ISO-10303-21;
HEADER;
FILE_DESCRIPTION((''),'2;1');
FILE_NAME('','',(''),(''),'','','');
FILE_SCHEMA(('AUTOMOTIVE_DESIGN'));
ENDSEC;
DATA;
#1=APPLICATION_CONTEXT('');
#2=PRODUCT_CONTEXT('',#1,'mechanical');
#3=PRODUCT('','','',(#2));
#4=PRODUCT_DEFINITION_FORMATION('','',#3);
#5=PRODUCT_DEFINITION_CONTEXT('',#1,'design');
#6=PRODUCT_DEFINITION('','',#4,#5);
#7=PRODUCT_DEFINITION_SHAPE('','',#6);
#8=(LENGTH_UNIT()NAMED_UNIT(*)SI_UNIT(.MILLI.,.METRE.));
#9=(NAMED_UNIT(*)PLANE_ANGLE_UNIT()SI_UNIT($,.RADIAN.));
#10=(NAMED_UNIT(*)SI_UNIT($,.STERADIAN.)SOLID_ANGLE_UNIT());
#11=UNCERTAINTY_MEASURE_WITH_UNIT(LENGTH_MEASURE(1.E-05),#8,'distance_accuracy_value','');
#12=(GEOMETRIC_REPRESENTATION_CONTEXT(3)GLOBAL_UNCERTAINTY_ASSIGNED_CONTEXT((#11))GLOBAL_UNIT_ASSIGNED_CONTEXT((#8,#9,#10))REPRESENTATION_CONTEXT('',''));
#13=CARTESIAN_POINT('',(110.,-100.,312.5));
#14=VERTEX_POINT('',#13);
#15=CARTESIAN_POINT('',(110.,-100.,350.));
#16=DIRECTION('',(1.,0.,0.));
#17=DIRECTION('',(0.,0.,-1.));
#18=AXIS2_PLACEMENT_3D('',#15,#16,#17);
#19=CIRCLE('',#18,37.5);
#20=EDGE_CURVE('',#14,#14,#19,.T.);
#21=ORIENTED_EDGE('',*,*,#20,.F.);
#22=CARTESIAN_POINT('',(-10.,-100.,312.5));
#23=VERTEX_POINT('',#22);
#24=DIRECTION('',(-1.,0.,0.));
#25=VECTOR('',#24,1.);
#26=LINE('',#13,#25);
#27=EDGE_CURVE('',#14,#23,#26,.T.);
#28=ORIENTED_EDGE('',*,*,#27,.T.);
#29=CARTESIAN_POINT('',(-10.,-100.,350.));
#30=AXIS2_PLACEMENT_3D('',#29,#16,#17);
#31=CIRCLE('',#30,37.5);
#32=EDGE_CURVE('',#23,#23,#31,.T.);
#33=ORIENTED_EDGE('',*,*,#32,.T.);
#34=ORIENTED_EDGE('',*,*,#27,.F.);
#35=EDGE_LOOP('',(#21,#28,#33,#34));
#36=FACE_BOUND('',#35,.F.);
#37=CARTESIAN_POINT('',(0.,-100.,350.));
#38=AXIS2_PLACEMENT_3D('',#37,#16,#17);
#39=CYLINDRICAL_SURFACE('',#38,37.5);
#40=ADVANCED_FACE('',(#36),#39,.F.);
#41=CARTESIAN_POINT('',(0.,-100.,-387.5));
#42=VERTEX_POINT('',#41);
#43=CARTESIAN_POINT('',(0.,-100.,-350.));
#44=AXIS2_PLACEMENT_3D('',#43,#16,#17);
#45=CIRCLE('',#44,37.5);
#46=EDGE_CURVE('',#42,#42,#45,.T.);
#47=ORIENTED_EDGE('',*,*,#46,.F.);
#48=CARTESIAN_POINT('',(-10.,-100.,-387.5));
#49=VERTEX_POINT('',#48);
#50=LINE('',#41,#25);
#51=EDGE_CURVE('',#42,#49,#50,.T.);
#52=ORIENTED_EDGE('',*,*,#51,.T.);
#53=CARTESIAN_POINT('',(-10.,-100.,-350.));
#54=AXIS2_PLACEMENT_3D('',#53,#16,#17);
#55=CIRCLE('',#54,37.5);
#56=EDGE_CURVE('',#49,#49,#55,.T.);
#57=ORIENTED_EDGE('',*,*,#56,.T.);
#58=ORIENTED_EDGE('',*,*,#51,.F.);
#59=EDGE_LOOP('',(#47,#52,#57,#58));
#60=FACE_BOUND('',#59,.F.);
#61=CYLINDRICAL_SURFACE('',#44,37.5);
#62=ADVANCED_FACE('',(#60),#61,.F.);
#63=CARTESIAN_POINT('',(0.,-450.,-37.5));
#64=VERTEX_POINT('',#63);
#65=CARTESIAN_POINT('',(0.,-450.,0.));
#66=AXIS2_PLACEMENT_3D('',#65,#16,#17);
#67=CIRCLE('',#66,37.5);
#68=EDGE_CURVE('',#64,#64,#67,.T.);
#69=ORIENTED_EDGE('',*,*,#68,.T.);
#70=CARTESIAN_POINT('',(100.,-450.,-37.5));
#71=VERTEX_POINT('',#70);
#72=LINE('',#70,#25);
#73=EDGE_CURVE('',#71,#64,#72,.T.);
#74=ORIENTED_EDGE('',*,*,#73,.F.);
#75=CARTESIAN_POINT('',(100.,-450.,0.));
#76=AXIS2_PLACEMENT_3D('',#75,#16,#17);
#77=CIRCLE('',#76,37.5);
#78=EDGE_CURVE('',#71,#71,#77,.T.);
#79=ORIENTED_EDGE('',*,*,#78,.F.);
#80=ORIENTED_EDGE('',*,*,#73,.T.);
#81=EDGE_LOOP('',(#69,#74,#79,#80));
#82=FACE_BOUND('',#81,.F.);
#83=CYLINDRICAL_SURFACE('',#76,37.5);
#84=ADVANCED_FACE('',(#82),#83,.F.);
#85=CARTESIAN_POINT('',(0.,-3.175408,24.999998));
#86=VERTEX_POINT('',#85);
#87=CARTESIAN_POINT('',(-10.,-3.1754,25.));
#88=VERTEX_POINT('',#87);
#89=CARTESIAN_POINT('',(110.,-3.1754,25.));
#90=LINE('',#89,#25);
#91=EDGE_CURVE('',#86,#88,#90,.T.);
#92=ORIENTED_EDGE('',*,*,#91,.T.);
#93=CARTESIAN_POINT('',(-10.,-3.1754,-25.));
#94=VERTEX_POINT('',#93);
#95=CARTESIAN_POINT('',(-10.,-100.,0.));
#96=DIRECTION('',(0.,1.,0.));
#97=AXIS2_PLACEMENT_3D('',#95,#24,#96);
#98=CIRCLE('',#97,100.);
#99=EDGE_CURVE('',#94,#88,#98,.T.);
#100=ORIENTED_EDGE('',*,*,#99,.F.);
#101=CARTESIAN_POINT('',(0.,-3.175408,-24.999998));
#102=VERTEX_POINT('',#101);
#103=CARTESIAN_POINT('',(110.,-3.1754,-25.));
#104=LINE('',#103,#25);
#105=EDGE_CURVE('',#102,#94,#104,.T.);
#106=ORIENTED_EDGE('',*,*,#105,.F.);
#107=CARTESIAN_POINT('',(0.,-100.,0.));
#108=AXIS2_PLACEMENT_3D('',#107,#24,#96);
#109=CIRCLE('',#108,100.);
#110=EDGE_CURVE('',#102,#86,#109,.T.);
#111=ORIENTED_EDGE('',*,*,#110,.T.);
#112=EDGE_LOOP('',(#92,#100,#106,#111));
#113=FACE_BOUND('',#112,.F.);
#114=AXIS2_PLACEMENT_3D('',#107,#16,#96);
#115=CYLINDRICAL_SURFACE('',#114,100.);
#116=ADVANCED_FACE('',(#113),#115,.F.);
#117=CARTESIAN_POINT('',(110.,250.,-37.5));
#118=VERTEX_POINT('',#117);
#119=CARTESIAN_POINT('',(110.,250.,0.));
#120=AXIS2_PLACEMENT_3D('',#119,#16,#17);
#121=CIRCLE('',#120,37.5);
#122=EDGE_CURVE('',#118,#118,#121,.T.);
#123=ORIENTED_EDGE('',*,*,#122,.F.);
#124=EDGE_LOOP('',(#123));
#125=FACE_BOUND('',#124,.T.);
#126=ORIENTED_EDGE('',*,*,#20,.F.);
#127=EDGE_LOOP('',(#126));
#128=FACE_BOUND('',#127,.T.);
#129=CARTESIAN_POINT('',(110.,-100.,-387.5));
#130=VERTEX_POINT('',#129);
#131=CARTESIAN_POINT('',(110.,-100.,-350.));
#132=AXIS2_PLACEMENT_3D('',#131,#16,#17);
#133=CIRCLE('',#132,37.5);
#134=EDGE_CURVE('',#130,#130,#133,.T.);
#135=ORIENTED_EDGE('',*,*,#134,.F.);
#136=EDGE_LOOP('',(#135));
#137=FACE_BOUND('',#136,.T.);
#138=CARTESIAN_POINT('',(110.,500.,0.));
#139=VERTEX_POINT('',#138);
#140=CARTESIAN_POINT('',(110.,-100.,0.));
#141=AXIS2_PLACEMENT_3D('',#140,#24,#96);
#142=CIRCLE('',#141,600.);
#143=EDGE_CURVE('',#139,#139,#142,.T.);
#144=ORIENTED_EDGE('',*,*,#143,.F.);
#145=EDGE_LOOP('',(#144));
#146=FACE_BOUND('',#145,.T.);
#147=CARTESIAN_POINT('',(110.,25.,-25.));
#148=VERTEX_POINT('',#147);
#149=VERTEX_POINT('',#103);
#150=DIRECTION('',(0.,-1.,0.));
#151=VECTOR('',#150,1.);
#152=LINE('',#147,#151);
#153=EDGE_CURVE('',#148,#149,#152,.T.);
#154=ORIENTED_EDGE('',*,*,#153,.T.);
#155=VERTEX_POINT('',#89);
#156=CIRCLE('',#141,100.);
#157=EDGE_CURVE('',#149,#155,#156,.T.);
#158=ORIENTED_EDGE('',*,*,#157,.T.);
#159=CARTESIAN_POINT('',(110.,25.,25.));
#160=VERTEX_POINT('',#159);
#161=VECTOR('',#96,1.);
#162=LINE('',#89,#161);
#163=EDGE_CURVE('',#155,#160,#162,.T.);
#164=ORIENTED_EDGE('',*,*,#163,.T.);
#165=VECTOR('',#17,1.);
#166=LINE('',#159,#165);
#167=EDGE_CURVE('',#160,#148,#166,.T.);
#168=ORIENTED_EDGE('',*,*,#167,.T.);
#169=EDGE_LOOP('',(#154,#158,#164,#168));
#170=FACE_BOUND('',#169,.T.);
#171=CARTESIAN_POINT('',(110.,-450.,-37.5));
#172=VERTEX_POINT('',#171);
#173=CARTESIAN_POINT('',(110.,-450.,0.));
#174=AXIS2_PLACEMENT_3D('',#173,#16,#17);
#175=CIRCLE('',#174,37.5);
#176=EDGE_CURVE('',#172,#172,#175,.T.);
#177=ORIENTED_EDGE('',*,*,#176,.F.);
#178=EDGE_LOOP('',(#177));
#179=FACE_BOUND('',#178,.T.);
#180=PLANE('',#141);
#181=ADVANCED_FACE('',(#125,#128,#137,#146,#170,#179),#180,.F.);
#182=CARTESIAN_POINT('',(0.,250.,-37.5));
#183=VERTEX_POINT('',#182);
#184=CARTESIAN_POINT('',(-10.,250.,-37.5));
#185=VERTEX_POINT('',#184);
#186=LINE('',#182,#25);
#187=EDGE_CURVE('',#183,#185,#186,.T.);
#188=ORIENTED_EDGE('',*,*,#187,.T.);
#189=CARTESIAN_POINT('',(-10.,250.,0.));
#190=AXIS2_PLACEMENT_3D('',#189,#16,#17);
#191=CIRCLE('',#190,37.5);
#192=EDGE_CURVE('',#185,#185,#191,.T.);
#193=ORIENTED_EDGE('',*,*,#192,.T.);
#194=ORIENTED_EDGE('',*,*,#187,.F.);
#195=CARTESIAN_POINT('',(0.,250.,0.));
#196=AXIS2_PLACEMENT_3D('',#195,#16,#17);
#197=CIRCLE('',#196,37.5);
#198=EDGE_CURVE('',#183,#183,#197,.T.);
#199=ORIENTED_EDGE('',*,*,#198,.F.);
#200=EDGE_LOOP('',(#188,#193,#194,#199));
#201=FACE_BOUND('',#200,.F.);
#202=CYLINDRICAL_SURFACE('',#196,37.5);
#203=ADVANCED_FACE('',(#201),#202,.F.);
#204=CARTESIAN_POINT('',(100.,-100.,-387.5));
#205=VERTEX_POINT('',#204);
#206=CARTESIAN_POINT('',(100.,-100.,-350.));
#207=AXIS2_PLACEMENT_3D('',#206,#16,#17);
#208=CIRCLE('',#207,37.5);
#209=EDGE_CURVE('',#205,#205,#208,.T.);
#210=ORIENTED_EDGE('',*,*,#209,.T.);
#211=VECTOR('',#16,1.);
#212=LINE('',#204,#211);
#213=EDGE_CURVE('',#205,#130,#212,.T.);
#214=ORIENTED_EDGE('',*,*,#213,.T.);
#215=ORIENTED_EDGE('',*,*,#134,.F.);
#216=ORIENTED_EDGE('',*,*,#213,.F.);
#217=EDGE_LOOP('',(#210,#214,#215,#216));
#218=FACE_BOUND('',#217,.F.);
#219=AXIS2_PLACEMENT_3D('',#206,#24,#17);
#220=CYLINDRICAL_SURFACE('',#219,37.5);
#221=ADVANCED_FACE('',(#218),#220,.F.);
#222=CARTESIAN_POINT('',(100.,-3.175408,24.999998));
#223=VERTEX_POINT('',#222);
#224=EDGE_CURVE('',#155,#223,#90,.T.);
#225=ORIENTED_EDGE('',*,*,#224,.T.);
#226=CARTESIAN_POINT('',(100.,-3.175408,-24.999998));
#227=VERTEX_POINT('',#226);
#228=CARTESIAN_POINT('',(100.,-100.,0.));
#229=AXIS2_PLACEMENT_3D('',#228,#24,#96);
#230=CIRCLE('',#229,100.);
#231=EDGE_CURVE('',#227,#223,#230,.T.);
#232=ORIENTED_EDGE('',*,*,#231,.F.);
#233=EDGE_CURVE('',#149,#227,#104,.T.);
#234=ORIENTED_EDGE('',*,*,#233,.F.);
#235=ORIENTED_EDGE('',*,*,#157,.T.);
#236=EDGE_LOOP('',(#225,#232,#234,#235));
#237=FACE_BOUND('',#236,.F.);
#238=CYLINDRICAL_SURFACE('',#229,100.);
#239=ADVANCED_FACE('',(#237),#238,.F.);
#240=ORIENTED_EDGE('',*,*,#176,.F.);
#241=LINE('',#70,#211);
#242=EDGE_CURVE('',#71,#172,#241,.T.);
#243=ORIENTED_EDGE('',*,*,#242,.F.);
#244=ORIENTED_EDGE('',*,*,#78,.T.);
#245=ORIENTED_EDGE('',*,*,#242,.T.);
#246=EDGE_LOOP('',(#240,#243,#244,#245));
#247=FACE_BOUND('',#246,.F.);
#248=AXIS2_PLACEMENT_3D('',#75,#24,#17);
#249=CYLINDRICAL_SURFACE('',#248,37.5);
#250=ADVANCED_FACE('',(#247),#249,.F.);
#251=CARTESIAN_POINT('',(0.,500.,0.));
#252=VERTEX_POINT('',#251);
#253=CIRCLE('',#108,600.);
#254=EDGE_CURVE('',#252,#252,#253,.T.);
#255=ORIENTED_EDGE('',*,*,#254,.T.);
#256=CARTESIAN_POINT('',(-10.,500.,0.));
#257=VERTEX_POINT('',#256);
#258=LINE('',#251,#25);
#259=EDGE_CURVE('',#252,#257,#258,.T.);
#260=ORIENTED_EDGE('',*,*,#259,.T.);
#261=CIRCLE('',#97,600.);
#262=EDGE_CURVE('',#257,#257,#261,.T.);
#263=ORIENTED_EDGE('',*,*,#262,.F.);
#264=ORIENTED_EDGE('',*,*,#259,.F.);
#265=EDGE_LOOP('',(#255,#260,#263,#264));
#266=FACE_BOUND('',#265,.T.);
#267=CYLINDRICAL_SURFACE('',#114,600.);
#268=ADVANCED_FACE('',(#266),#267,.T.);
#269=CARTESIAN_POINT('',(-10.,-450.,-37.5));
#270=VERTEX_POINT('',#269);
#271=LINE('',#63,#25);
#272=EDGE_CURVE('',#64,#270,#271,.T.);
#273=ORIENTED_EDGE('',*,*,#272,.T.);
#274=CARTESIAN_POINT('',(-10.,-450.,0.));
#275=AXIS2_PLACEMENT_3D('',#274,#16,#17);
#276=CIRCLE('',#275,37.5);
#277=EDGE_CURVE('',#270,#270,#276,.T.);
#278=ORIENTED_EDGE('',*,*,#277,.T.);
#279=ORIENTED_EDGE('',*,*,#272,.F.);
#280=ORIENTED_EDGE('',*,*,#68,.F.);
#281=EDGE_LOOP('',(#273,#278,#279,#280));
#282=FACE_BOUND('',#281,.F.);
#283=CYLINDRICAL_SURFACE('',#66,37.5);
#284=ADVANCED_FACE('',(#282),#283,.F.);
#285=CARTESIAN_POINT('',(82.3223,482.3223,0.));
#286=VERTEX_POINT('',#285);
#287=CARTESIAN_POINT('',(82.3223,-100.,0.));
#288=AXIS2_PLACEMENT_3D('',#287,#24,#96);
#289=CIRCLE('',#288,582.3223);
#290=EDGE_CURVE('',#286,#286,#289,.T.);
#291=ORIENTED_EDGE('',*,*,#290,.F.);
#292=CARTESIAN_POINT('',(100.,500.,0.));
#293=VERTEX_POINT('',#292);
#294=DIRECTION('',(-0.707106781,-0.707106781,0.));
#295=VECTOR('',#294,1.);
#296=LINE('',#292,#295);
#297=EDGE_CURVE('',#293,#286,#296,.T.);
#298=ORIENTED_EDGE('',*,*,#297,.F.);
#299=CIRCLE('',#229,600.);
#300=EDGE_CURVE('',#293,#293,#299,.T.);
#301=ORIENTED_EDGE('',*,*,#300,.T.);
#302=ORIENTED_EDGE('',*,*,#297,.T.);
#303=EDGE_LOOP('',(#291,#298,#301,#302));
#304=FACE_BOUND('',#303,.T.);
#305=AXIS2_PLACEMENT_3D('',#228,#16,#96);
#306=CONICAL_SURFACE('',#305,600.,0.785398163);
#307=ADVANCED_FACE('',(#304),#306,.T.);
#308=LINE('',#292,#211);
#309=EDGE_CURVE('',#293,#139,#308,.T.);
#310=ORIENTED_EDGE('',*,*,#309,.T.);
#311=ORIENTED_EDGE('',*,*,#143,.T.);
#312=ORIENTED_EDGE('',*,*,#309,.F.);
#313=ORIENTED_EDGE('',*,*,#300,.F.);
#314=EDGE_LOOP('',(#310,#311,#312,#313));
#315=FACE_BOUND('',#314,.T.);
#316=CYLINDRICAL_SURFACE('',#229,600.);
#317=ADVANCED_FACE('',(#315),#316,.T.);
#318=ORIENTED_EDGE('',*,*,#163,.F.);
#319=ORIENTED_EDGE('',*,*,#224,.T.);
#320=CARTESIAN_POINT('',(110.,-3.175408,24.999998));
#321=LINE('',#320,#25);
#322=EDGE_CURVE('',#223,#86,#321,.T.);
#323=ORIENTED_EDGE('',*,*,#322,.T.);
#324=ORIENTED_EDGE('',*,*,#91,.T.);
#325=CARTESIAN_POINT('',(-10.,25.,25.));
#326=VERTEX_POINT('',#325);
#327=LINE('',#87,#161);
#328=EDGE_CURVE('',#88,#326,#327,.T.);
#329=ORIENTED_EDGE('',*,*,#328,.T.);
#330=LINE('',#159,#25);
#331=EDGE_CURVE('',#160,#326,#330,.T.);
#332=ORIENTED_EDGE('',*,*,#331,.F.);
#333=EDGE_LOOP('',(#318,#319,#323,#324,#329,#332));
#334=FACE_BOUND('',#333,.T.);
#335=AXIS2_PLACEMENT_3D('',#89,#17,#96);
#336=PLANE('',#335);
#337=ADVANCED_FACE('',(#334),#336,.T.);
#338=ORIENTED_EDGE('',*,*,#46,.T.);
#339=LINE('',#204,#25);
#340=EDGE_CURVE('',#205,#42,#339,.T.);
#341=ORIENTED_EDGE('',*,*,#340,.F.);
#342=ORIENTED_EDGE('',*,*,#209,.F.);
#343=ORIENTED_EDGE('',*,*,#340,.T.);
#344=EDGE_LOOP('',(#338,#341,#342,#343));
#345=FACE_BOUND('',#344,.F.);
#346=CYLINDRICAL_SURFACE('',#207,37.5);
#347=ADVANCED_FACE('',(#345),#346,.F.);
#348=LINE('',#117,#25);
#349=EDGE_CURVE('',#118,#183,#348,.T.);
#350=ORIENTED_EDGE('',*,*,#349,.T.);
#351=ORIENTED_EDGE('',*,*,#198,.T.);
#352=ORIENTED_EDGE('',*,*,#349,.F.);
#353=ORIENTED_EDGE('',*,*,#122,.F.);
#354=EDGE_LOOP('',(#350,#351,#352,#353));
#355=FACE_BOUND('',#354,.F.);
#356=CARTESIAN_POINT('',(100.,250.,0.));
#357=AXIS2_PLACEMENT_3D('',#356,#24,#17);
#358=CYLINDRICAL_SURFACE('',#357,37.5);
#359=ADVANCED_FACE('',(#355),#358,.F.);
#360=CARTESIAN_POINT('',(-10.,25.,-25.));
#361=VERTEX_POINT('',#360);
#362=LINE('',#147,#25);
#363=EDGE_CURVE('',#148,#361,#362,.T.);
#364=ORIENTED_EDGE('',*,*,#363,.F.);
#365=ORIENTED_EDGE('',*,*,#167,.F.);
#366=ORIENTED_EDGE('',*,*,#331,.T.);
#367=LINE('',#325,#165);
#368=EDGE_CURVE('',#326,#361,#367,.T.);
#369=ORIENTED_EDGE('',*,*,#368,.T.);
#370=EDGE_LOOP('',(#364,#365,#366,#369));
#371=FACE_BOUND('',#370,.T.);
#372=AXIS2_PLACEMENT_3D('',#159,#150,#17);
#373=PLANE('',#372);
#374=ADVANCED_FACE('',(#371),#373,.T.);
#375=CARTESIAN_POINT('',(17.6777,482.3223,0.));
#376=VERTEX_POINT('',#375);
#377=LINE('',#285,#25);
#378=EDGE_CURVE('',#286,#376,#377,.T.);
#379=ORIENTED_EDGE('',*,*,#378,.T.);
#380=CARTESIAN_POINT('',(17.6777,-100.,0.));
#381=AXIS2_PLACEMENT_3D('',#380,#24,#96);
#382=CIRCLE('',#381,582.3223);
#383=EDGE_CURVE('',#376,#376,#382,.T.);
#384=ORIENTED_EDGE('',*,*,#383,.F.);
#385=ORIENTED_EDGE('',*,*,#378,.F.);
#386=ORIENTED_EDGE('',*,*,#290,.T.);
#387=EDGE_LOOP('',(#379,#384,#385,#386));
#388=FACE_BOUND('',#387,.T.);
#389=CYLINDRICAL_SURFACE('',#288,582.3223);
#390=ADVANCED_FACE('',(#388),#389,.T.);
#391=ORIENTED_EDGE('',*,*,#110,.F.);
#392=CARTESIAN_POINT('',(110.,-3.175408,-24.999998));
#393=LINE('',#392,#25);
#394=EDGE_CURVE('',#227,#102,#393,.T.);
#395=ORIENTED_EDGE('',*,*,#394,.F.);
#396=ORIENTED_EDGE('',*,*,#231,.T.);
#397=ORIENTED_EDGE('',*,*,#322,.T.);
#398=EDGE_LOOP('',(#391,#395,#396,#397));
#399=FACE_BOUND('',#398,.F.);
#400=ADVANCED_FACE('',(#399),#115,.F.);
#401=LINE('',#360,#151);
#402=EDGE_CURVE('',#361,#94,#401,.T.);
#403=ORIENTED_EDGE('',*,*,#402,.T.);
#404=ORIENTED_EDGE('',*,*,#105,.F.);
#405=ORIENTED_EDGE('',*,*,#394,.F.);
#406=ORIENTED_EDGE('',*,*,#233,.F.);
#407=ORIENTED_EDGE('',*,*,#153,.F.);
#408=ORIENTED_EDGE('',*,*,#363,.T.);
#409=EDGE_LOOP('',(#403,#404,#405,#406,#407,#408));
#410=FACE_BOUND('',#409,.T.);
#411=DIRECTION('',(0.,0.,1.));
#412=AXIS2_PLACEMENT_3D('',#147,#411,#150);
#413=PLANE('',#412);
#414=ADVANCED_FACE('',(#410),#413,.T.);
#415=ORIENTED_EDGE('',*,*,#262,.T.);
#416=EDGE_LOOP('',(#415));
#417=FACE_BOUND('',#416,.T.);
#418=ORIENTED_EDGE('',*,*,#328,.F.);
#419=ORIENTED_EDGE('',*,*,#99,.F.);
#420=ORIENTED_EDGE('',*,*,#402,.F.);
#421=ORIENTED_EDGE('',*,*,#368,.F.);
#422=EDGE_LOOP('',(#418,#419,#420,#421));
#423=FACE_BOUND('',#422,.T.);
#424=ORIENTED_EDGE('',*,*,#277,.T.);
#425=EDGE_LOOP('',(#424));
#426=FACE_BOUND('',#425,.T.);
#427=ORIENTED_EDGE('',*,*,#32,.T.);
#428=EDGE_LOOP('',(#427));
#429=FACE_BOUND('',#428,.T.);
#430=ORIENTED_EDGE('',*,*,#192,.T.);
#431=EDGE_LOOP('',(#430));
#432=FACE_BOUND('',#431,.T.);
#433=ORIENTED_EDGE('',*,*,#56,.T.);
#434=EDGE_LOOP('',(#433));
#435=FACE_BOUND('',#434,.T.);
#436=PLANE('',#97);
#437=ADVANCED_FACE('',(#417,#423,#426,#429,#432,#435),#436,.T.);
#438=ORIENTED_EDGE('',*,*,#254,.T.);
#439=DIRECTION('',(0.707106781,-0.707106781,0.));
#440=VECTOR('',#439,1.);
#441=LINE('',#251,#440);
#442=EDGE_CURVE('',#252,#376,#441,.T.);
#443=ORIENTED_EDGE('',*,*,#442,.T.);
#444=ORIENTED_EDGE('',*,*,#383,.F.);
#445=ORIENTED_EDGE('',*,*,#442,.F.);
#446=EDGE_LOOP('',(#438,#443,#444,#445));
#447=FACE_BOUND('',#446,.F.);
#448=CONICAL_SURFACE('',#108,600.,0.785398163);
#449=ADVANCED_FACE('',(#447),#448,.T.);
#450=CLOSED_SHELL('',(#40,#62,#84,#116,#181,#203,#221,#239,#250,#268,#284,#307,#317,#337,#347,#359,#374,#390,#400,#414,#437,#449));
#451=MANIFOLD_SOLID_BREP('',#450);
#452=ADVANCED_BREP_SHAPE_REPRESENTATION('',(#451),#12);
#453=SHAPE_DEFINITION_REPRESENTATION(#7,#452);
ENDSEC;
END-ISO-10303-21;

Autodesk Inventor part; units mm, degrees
ref_plane "YZ Plane" through (0, 0, 0) normal (1, 0, 0) x (0, 1, 0)
ref_plane "XZ Plane" through (0, 0, 0) normal (0, 1, 0) x (-1, 0, 0)
ref_plane "XY Plane" through (0, 0, 0) normal (0, 0, 1) x (1, 0, 0)
sketch "Boceto1" plane through (0, 0, 0) normal (0, 0, 1) x (1, 0, 0)
  line L0 (0, 0) -> (100, 0)
  line L1 (100, 0) -> (100, 500)
  line L2 (0, 500) -> (0, 0)
  line L3 (0, 500) -> (17.6777, 482.3223)
  line L4 (0, 500) -> (25, 500) construction
  line L5 (100, 500) -> (82.3223, 482.3223)
  line L6 (82.3223, 482.3223) -> (17.6777, 482.3223)
  line L7 (50, -100) -> (-150, -100)
  dimension "d1" = 500
  dimension "d2" = 25
  dimension "d3" = 45
  dimension "d4" = 25
  dimension "d6" = 200
revolve "Revolución1" add sketch "Boceto1" angle 360 about axis through (50, -100, 0) along (-1, 0, 0)
sketch "Boceto2" plane through (100, -100, 0) normal (1, 0, 0) x (0, 0, -1)
  circle A0 centre (0, 0) radius 600 projected
  circle A1 centre (0, 350) radius 37.5
  circle A2 centre (-350, 0) radius 37.5
  circle A3 centre (0, -350) radius 37.5
  circle A4 centre (350, 0) radius 37.5
  point P0 (0, 100)
  dimension "d11" = 360
extrude "Extrusión1" cut sketch "Boceto2" against normal blind 100 contours A1 | A2 | A3 | A4
thicken "Engrosado1" operation add thickness 10 both sides no extend neighbours no toward (1, 0, 0) faces at (100, -364.9419, 262.9039)
thicken "Engrosado2" operation add thickness 10 both sides no extend neighbours no toward (-1, 0, 0) faces at (0, -364.9419, 262.9039)
sketch "Boceto3" plane through (110, -100, 0) normal (1, 0, 0) x (0, 0, -1)
  line L0 (-25, 125) -> (25, 125)
  line L1 (25, 125) -> (25, 96.8246)
  line L2 (-25, 96.8246) -> (-25, 125)
  line L3 (-25, 125) -> (25, 75) construction
  line L4 (25, 125) -> (-25, 75) construction
  arc A0 (25, 96.8246) -> (-25, 96.8246) centre (0, 0) ccw
  point P0 (0, 100)
extrude "Extrusión2" cut sketch "Boceto3" against normal blind 120
properties part number "Polea clase #2"
